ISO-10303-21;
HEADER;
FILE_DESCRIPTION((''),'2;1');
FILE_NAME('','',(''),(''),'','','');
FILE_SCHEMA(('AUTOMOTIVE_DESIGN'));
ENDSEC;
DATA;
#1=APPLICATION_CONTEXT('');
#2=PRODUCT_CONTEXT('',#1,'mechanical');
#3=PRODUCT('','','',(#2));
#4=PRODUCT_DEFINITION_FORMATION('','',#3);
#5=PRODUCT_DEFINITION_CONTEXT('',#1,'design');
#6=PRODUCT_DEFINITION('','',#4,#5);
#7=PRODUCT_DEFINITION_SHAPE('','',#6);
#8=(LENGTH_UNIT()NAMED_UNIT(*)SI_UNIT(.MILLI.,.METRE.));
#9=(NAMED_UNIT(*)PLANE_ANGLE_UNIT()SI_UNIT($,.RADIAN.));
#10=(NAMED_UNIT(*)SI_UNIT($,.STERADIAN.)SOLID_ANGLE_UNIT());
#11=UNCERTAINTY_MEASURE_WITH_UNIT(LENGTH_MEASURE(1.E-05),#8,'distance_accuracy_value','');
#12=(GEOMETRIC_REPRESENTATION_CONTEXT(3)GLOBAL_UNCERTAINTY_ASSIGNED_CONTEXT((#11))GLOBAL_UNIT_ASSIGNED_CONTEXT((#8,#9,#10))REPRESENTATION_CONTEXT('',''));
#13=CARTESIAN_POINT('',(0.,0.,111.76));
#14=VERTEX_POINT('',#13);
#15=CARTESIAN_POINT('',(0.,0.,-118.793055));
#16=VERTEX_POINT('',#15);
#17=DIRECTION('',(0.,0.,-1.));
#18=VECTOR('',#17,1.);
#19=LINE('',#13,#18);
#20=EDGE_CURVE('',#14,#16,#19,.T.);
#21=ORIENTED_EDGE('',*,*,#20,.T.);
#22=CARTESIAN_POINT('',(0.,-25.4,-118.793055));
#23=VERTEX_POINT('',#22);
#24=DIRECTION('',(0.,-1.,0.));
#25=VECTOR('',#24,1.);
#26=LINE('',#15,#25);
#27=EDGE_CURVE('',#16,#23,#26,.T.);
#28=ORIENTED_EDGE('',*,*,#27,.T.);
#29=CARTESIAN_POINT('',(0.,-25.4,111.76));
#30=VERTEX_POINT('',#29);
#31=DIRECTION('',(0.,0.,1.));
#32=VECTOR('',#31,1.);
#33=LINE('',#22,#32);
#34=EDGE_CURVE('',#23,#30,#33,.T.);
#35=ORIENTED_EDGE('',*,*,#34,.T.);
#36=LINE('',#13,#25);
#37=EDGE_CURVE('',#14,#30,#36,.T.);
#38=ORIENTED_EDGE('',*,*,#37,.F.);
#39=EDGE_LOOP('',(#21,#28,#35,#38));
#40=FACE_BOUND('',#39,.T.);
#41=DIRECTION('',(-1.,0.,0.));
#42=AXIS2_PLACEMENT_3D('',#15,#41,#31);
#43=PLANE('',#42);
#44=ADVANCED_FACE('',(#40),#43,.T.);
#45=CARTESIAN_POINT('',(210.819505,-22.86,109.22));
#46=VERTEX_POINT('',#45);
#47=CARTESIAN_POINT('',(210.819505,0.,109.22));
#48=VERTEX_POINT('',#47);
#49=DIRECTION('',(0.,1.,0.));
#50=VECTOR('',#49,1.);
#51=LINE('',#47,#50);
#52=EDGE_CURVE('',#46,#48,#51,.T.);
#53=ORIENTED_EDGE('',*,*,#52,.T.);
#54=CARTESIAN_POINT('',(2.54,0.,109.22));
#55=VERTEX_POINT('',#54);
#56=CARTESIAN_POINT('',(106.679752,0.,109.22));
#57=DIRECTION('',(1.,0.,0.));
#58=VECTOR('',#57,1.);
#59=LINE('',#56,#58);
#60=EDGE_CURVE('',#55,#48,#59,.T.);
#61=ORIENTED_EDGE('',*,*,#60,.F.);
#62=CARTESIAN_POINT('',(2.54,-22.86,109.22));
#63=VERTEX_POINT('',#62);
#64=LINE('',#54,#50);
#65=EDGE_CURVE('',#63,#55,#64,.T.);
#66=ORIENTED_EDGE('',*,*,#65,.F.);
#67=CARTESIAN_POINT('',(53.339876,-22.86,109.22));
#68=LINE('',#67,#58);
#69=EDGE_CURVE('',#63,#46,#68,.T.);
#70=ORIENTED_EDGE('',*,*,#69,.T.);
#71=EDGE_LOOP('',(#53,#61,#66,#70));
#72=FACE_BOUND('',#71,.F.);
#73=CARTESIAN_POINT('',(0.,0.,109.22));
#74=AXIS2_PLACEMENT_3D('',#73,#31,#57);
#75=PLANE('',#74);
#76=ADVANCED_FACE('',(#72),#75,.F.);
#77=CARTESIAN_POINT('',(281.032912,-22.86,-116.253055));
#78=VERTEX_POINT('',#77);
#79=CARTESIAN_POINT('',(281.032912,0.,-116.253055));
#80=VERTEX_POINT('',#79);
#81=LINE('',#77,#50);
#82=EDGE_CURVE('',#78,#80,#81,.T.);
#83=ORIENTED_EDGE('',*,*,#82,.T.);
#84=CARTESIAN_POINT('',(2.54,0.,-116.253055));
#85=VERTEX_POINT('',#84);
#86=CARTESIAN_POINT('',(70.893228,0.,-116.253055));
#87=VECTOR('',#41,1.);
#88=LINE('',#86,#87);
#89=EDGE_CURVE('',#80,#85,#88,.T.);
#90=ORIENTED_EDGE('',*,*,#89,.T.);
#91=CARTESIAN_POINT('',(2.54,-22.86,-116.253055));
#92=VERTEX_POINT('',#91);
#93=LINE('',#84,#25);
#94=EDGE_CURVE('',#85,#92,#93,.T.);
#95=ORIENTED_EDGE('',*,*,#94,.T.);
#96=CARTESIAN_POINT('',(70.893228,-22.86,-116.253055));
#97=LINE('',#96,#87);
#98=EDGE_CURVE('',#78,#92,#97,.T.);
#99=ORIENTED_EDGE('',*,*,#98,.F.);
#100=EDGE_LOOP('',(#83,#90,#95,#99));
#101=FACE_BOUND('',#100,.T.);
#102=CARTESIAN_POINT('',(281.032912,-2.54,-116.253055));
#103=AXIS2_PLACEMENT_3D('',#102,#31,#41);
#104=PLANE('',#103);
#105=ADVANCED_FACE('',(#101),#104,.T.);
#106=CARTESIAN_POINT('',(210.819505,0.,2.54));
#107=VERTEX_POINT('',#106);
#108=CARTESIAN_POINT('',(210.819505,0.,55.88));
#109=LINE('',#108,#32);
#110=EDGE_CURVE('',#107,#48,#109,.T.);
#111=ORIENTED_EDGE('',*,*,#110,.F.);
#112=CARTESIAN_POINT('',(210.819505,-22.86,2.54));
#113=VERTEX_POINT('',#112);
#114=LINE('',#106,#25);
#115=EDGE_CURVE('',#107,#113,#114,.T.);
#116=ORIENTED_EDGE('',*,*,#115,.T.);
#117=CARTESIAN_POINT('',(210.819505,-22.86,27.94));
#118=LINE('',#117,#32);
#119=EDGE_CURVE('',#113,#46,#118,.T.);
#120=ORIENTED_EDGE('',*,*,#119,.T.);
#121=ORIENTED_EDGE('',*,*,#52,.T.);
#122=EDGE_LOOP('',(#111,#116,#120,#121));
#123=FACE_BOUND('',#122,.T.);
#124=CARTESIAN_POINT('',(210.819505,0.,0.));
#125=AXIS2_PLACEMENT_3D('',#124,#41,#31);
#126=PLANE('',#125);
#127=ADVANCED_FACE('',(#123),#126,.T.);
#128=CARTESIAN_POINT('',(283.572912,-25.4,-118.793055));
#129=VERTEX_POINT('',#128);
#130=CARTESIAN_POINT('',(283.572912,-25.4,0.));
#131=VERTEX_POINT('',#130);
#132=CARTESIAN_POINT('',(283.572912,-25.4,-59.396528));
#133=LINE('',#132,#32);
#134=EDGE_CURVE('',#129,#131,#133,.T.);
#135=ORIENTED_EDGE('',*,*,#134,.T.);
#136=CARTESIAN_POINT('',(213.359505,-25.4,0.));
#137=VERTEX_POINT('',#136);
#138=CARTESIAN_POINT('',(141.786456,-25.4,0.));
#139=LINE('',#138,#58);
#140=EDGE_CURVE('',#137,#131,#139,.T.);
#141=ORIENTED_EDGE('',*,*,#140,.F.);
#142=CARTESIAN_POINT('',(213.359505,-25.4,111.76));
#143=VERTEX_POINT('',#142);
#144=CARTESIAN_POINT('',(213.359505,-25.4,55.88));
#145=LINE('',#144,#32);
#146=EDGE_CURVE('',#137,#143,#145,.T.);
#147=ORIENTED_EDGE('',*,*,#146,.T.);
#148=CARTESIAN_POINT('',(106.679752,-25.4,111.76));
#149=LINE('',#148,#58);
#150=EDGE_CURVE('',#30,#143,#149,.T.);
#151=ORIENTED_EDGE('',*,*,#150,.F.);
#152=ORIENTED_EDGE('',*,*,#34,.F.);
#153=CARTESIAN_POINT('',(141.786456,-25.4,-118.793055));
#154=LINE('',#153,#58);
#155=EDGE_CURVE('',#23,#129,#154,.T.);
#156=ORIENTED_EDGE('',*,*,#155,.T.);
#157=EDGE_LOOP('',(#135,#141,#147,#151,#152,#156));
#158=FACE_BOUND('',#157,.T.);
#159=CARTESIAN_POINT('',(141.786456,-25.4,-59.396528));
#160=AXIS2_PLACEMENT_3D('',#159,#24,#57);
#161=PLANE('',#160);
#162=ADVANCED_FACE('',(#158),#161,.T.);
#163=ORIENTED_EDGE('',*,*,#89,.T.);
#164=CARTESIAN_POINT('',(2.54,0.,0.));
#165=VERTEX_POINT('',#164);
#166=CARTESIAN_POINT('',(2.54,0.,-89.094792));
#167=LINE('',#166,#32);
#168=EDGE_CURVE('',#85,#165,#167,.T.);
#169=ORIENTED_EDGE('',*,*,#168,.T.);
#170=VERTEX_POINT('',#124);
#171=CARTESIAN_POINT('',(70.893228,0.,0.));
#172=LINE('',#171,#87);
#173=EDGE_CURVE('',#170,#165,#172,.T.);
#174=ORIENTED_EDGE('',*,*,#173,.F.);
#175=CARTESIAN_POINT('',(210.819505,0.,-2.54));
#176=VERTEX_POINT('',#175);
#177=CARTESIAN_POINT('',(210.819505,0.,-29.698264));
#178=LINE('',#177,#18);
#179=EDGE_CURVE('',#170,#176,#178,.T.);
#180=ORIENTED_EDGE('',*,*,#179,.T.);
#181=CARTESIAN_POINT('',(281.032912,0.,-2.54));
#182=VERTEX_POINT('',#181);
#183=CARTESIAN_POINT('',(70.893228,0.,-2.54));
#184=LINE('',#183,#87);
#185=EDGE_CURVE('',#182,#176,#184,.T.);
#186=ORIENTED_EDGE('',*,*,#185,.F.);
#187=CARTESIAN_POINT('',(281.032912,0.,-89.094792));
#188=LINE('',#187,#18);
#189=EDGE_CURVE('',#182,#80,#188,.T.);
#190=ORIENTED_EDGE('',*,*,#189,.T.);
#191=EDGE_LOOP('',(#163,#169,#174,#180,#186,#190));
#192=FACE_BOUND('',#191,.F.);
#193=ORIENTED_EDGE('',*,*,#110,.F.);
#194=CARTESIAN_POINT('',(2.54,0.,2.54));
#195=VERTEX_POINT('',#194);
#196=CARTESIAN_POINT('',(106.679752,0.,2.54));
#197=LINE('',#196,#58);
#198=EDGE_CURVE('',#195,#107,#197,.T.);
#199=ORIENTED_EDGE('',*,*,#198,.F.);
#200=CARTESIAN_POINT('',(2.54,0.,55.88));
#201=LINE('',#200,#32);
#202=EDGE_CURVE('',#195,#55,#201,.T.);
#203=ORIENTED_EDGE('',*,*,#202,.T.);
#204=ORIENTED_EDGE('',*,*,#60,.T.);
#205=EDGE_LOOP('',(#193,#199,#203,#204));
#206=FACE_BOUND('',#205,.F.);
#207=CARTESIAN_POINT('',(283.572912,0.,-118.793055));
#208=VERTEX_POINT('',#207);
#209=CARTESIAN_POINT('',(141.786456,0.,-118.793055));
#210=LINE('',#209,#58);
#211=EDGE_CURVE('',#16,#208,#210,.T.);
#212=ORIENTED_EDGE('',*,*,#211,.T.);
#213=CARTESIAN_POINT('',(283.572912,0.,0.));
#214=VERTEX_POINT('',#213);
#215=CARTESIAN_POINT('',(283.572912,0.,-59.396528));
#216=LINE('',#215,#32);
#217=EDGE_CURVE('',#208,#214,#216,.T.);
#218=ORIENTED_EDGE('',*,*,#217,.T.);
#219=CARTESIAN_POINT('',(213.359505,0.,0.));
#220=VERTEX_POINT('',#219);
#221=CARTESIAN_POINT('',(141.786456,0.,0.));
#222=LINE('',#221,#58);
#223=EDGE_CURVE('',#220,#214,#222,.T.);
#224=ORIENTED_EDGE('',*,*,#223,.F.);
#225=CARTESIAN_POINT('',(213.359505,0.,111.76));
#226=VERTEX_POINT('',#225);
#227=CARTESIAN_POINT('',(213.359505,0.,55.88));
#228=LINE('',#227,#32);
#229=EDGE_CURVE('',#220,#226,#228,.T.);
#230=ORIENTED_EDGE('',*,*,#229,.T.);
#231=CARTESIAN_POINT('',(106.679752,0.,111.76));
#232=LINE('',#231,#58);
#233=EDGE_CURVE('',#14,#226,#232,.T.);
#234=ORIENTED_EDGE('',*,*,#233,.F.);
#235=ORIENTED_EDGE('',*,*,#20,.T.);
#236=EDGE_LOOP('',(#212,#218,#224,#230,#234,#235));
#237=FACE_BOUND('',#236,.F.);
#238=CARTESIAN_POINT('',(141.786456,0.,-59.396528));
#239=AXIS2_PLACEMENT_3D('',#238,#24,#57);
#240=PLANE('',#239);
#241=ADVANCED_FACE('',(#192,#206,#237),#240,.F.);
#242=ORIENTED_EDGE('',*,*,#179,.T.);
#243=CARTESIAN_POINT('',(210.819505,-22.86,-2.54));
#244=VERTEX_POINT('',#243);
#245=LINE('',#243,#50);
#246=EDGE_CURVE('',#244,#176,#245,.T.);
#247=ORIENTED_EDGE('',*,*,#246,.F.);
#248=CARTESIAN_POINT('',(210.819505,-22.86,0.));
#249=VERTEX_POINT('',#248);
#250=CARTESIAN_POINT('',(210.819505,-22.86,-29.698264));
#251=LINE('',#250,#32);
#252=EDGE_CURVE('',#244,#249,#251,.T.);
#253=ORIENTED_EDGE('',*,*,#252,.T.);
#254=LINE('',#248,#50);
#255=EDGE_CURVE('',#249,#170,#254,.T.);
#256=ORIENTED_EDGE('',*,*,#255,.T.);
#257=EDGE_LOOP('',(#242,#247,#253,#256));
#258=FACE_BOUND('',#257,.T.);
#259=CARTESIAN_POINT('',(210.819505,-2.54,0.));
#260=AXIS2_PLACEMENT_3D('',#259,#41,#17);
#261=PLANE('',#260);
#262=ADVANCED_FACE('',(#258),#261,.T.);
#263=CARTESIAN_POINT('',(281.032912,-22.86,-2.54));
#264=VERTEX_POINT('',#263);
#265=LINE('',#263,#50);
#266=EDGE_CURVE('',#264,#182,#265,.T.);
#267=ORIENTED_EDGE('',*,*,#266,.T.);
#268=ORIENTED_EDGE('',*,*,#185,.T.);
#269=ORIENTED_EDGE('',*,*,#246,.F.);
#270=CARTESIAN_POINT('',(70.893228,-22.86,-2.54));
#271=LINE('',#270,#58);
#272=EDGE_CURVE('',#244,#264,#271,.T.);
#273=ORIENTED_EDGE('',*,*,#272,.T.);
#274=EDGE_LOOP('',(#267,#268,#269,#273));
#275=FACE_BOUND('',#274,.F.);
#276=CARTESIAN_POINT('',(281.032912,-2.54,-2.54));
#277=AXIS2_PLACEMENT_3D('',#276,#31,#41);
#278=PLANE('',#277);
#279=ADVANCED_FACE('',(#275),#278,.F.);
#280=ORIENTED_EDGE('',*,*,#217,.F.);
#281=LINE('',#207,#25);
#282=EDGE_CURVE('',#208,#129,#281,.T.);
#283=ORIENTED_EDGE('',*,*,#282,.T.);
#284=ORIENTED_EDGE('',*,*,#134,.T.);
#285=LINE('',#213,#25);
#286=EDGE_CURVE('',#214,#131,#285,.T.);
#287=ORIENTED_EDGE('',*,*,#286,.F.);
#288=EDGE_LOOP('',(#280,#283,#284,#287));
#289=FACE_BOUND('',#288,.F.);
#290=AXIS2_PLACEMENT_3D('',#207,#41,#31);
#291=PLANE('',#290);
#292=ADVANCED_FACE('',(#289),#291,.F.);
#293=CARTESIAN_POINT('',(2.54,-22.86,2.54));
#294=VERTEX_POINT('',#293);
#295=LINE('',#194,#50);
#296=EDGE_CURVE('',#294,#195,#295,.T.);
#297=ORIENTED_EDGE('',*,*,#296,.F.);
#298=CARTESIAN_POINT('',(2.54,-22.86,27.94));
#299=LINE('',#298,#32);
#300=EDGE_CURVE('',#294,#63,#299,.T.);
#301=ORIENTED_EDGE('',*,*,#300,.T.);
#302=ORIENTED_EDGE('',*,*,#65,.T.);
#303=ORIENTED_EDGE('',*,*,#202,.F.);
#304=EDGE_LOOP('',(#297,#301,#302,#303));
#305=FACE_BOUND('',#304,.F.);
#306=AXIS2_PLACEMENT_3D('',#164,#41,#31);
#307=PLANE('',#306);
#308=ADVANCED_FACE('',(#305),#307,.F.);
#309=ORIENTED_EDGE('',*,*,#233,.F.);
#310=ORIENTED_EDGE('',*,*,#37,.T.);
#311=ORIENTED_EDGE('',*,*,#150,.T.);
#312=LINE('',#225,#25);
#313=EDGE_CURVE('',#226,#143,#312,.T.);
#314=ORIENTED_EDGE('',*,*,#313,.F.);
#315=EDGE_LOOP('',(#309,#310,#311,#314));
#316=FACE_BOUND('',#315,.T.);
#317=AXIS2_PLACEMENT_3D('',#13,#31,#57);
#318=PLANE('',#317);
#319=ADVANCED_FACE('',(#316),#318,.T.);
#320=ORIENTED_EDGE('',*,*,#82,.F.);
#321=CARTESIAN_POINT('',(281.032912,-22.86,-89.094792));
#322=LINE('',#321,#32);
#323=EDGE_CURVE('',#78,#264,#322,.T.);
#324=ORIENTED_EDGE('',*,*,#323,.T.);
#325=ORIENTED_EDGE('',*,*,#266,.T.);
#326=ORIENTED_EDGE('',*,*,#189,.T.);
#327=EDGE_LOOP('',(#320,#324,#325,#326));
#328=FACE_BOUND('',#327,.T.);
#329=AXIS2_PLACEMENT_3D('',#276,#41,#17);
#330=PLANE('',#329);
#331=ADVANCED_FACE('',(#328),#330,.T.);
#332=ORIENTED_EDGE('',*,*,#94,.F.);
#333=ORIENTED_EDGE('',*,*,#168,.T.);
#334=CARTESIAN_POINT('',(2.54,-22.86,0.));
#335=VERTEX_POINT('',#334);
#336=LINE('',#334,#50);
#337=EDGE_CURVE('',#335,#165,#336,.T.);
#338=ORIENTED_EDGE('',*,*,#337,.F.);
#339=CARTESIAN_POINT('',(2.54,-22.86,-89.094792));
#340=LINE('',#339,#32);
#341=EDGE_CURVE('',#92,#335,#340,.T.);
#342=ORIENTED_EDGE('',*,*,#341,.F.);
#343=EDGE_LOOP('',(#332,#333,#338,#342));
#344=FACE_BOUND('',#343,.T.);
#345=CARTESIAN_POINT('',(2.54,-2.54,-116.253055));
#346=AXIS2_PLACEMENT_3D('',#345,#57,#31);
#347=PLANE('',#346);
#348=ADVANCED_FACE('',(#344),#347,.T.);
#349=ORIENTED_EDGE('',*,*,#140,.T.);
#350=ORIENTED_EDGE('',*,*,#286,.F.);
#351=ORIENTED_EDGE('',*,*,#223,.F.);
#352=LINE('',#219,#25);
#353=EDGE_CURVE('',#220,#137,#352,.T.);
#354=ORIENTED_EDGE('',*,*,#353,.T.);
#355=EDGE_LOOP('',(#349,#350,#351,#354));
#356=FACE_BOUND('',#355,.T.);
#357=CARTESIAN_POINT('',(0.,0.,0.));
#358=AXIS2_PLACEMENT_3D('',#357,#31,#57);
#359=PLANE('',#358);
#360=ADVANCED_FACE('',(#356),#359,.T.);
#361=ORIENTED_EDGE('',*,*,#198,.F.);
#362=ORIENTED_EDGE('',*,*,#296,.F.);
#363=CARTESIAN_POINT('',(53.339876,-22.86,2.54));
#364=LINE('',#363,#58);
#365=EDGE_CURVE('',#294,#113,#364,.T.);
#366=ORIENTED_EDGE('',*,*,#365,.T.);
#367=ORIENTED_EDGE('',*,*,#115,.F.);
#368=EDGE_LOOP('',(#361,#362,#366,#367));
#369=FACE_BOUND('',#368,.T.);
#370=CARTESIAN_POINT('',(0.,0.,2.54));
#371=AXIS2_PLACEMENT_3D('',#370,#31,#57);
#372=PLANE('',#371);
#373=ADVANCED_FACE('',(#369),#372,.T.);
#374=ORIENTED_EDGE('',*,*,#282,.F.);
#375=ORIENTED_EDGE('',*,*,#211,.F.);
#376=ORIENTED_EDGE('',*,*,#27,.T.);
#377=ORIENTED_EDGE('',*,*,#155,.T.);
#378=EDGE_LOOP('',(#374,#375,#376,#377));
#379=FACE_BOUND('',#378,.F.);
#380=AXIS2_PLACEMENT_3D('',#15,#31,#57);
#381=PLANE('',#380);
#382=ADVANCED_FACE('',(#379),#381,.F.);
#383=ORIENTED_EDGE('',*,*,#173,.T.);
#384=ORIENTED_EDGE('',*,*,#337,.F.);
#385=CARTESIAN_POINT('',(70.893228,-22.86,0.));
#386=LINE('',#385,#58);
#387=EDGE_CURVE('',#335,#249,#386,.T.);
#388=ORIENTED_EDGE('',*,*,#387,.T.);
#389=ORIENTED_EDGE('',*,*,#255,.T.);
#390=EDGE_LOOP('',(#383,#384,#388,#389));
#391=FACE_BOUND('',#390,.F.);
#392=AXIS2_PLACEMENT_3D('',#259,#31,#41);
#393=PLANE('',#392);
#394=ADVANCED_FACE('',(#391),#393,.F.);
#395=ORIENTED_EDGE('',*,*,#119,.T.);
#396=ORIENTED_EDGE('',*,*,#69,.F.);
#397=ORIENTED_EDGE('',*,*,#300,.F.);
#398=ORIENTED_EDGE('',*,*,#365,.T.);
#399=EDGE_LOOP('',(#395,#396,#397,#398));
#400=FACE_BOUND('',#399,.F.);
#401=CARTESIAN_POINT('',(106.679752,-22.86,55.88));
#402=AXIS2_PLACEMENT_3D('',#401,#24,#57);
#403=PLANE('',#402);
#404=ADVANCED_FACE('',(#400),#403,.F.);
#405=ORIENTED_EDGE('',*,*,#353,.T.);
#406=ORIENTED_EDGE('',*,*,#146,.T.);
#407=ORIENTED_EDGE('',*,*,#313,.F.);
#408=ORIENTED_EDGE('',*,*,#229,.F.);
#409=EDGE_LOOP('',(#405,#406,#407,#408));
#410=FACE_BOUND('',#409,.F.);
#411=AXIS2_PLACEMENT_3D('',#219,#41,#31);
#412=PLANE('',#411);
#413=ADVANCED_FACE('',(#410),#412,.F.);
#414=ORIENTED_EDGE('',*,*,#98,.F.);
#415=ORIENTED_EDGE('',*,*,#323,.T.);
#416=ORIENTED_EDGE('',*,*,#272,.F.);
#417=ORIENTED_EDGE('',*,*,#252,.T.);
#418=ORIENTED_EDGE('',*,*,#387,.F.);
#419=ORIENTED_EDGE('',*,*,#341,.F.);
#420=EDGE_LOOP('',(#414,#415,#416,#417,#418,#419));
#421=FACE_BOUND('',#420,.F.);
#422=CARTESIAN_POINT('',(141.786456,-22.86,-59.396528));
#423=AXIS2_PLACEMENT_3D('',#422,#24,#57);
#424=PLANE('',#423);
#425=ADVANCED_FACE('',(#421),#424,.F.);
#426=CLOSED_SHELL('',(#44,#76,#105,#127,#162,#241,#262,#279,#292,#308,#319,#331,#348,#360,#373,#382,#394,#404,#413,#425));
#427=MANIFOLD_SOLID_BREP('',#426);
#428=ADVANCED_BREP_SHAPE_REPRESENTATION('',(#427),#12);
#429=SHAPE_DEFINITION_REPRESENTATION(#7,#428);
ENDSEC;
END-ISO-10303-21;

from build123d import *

# Parameters (mm, degrees)
F0_W     = 213.3595049381
F0_H     = 111.76
F1_DEPTH = 25.4
F2_T     = -2.54
F3_W     = 283.5729122162
F3_H     = 118.7930554152
F4_DEPTH = 25.4
F5_T     = -2.54


# Not quite as in the source:
# - a shell that OpenCascade refuses in one call is made with other operations: the cavity is built on its own and cut out


with BuildPart() as f1:
    # F0 (on Front) → F1 (new body)
    with BuildSketch(Plane.XZ):
        with Locations((106.6797524691, 55.88)):
            Rectangle(F0_W, F0_H)
    extrude(amount=F1_DEPTH)

    # F2
    f2_openings = [f1.faces().sort_by_distance(p)[0] for p in [
        (106.679752, 0, 55.88),
    ]]
    offset(amount=F2_T, openings=f2_openings)

    # F3 (on Front) → F4 (join)
    with BuildSketch(Plane.XZ):
        with Locations((141.7864561081, -59.3965277076)):
            Rectangle(F3_W, F3_H)
    extrude(amount=F4_DEPTH)

    # F5: a shell. OpenCascade refuses it in one call, so the cavity is built on its own and cut out:
    # the body offset inwards by the wall thickness, plus a prism from it out through each open face.
    f5_core = offset(f1.part, amount=F5_T, kind=Kind.INTERSECTION, mode=Mode.PRIVATE)
    f5_exits = [f5_core.faces().sort_by_distance(p)[0] for p in [
        (141.209622, -2.54, -58.441458),
    ]]
    add(f5_core, mode=Mode.SUBTRACT)
    extrude(f5_exits, amount=-F5_T, mode=Mode.SUBTRACT)


solid = f1.part
